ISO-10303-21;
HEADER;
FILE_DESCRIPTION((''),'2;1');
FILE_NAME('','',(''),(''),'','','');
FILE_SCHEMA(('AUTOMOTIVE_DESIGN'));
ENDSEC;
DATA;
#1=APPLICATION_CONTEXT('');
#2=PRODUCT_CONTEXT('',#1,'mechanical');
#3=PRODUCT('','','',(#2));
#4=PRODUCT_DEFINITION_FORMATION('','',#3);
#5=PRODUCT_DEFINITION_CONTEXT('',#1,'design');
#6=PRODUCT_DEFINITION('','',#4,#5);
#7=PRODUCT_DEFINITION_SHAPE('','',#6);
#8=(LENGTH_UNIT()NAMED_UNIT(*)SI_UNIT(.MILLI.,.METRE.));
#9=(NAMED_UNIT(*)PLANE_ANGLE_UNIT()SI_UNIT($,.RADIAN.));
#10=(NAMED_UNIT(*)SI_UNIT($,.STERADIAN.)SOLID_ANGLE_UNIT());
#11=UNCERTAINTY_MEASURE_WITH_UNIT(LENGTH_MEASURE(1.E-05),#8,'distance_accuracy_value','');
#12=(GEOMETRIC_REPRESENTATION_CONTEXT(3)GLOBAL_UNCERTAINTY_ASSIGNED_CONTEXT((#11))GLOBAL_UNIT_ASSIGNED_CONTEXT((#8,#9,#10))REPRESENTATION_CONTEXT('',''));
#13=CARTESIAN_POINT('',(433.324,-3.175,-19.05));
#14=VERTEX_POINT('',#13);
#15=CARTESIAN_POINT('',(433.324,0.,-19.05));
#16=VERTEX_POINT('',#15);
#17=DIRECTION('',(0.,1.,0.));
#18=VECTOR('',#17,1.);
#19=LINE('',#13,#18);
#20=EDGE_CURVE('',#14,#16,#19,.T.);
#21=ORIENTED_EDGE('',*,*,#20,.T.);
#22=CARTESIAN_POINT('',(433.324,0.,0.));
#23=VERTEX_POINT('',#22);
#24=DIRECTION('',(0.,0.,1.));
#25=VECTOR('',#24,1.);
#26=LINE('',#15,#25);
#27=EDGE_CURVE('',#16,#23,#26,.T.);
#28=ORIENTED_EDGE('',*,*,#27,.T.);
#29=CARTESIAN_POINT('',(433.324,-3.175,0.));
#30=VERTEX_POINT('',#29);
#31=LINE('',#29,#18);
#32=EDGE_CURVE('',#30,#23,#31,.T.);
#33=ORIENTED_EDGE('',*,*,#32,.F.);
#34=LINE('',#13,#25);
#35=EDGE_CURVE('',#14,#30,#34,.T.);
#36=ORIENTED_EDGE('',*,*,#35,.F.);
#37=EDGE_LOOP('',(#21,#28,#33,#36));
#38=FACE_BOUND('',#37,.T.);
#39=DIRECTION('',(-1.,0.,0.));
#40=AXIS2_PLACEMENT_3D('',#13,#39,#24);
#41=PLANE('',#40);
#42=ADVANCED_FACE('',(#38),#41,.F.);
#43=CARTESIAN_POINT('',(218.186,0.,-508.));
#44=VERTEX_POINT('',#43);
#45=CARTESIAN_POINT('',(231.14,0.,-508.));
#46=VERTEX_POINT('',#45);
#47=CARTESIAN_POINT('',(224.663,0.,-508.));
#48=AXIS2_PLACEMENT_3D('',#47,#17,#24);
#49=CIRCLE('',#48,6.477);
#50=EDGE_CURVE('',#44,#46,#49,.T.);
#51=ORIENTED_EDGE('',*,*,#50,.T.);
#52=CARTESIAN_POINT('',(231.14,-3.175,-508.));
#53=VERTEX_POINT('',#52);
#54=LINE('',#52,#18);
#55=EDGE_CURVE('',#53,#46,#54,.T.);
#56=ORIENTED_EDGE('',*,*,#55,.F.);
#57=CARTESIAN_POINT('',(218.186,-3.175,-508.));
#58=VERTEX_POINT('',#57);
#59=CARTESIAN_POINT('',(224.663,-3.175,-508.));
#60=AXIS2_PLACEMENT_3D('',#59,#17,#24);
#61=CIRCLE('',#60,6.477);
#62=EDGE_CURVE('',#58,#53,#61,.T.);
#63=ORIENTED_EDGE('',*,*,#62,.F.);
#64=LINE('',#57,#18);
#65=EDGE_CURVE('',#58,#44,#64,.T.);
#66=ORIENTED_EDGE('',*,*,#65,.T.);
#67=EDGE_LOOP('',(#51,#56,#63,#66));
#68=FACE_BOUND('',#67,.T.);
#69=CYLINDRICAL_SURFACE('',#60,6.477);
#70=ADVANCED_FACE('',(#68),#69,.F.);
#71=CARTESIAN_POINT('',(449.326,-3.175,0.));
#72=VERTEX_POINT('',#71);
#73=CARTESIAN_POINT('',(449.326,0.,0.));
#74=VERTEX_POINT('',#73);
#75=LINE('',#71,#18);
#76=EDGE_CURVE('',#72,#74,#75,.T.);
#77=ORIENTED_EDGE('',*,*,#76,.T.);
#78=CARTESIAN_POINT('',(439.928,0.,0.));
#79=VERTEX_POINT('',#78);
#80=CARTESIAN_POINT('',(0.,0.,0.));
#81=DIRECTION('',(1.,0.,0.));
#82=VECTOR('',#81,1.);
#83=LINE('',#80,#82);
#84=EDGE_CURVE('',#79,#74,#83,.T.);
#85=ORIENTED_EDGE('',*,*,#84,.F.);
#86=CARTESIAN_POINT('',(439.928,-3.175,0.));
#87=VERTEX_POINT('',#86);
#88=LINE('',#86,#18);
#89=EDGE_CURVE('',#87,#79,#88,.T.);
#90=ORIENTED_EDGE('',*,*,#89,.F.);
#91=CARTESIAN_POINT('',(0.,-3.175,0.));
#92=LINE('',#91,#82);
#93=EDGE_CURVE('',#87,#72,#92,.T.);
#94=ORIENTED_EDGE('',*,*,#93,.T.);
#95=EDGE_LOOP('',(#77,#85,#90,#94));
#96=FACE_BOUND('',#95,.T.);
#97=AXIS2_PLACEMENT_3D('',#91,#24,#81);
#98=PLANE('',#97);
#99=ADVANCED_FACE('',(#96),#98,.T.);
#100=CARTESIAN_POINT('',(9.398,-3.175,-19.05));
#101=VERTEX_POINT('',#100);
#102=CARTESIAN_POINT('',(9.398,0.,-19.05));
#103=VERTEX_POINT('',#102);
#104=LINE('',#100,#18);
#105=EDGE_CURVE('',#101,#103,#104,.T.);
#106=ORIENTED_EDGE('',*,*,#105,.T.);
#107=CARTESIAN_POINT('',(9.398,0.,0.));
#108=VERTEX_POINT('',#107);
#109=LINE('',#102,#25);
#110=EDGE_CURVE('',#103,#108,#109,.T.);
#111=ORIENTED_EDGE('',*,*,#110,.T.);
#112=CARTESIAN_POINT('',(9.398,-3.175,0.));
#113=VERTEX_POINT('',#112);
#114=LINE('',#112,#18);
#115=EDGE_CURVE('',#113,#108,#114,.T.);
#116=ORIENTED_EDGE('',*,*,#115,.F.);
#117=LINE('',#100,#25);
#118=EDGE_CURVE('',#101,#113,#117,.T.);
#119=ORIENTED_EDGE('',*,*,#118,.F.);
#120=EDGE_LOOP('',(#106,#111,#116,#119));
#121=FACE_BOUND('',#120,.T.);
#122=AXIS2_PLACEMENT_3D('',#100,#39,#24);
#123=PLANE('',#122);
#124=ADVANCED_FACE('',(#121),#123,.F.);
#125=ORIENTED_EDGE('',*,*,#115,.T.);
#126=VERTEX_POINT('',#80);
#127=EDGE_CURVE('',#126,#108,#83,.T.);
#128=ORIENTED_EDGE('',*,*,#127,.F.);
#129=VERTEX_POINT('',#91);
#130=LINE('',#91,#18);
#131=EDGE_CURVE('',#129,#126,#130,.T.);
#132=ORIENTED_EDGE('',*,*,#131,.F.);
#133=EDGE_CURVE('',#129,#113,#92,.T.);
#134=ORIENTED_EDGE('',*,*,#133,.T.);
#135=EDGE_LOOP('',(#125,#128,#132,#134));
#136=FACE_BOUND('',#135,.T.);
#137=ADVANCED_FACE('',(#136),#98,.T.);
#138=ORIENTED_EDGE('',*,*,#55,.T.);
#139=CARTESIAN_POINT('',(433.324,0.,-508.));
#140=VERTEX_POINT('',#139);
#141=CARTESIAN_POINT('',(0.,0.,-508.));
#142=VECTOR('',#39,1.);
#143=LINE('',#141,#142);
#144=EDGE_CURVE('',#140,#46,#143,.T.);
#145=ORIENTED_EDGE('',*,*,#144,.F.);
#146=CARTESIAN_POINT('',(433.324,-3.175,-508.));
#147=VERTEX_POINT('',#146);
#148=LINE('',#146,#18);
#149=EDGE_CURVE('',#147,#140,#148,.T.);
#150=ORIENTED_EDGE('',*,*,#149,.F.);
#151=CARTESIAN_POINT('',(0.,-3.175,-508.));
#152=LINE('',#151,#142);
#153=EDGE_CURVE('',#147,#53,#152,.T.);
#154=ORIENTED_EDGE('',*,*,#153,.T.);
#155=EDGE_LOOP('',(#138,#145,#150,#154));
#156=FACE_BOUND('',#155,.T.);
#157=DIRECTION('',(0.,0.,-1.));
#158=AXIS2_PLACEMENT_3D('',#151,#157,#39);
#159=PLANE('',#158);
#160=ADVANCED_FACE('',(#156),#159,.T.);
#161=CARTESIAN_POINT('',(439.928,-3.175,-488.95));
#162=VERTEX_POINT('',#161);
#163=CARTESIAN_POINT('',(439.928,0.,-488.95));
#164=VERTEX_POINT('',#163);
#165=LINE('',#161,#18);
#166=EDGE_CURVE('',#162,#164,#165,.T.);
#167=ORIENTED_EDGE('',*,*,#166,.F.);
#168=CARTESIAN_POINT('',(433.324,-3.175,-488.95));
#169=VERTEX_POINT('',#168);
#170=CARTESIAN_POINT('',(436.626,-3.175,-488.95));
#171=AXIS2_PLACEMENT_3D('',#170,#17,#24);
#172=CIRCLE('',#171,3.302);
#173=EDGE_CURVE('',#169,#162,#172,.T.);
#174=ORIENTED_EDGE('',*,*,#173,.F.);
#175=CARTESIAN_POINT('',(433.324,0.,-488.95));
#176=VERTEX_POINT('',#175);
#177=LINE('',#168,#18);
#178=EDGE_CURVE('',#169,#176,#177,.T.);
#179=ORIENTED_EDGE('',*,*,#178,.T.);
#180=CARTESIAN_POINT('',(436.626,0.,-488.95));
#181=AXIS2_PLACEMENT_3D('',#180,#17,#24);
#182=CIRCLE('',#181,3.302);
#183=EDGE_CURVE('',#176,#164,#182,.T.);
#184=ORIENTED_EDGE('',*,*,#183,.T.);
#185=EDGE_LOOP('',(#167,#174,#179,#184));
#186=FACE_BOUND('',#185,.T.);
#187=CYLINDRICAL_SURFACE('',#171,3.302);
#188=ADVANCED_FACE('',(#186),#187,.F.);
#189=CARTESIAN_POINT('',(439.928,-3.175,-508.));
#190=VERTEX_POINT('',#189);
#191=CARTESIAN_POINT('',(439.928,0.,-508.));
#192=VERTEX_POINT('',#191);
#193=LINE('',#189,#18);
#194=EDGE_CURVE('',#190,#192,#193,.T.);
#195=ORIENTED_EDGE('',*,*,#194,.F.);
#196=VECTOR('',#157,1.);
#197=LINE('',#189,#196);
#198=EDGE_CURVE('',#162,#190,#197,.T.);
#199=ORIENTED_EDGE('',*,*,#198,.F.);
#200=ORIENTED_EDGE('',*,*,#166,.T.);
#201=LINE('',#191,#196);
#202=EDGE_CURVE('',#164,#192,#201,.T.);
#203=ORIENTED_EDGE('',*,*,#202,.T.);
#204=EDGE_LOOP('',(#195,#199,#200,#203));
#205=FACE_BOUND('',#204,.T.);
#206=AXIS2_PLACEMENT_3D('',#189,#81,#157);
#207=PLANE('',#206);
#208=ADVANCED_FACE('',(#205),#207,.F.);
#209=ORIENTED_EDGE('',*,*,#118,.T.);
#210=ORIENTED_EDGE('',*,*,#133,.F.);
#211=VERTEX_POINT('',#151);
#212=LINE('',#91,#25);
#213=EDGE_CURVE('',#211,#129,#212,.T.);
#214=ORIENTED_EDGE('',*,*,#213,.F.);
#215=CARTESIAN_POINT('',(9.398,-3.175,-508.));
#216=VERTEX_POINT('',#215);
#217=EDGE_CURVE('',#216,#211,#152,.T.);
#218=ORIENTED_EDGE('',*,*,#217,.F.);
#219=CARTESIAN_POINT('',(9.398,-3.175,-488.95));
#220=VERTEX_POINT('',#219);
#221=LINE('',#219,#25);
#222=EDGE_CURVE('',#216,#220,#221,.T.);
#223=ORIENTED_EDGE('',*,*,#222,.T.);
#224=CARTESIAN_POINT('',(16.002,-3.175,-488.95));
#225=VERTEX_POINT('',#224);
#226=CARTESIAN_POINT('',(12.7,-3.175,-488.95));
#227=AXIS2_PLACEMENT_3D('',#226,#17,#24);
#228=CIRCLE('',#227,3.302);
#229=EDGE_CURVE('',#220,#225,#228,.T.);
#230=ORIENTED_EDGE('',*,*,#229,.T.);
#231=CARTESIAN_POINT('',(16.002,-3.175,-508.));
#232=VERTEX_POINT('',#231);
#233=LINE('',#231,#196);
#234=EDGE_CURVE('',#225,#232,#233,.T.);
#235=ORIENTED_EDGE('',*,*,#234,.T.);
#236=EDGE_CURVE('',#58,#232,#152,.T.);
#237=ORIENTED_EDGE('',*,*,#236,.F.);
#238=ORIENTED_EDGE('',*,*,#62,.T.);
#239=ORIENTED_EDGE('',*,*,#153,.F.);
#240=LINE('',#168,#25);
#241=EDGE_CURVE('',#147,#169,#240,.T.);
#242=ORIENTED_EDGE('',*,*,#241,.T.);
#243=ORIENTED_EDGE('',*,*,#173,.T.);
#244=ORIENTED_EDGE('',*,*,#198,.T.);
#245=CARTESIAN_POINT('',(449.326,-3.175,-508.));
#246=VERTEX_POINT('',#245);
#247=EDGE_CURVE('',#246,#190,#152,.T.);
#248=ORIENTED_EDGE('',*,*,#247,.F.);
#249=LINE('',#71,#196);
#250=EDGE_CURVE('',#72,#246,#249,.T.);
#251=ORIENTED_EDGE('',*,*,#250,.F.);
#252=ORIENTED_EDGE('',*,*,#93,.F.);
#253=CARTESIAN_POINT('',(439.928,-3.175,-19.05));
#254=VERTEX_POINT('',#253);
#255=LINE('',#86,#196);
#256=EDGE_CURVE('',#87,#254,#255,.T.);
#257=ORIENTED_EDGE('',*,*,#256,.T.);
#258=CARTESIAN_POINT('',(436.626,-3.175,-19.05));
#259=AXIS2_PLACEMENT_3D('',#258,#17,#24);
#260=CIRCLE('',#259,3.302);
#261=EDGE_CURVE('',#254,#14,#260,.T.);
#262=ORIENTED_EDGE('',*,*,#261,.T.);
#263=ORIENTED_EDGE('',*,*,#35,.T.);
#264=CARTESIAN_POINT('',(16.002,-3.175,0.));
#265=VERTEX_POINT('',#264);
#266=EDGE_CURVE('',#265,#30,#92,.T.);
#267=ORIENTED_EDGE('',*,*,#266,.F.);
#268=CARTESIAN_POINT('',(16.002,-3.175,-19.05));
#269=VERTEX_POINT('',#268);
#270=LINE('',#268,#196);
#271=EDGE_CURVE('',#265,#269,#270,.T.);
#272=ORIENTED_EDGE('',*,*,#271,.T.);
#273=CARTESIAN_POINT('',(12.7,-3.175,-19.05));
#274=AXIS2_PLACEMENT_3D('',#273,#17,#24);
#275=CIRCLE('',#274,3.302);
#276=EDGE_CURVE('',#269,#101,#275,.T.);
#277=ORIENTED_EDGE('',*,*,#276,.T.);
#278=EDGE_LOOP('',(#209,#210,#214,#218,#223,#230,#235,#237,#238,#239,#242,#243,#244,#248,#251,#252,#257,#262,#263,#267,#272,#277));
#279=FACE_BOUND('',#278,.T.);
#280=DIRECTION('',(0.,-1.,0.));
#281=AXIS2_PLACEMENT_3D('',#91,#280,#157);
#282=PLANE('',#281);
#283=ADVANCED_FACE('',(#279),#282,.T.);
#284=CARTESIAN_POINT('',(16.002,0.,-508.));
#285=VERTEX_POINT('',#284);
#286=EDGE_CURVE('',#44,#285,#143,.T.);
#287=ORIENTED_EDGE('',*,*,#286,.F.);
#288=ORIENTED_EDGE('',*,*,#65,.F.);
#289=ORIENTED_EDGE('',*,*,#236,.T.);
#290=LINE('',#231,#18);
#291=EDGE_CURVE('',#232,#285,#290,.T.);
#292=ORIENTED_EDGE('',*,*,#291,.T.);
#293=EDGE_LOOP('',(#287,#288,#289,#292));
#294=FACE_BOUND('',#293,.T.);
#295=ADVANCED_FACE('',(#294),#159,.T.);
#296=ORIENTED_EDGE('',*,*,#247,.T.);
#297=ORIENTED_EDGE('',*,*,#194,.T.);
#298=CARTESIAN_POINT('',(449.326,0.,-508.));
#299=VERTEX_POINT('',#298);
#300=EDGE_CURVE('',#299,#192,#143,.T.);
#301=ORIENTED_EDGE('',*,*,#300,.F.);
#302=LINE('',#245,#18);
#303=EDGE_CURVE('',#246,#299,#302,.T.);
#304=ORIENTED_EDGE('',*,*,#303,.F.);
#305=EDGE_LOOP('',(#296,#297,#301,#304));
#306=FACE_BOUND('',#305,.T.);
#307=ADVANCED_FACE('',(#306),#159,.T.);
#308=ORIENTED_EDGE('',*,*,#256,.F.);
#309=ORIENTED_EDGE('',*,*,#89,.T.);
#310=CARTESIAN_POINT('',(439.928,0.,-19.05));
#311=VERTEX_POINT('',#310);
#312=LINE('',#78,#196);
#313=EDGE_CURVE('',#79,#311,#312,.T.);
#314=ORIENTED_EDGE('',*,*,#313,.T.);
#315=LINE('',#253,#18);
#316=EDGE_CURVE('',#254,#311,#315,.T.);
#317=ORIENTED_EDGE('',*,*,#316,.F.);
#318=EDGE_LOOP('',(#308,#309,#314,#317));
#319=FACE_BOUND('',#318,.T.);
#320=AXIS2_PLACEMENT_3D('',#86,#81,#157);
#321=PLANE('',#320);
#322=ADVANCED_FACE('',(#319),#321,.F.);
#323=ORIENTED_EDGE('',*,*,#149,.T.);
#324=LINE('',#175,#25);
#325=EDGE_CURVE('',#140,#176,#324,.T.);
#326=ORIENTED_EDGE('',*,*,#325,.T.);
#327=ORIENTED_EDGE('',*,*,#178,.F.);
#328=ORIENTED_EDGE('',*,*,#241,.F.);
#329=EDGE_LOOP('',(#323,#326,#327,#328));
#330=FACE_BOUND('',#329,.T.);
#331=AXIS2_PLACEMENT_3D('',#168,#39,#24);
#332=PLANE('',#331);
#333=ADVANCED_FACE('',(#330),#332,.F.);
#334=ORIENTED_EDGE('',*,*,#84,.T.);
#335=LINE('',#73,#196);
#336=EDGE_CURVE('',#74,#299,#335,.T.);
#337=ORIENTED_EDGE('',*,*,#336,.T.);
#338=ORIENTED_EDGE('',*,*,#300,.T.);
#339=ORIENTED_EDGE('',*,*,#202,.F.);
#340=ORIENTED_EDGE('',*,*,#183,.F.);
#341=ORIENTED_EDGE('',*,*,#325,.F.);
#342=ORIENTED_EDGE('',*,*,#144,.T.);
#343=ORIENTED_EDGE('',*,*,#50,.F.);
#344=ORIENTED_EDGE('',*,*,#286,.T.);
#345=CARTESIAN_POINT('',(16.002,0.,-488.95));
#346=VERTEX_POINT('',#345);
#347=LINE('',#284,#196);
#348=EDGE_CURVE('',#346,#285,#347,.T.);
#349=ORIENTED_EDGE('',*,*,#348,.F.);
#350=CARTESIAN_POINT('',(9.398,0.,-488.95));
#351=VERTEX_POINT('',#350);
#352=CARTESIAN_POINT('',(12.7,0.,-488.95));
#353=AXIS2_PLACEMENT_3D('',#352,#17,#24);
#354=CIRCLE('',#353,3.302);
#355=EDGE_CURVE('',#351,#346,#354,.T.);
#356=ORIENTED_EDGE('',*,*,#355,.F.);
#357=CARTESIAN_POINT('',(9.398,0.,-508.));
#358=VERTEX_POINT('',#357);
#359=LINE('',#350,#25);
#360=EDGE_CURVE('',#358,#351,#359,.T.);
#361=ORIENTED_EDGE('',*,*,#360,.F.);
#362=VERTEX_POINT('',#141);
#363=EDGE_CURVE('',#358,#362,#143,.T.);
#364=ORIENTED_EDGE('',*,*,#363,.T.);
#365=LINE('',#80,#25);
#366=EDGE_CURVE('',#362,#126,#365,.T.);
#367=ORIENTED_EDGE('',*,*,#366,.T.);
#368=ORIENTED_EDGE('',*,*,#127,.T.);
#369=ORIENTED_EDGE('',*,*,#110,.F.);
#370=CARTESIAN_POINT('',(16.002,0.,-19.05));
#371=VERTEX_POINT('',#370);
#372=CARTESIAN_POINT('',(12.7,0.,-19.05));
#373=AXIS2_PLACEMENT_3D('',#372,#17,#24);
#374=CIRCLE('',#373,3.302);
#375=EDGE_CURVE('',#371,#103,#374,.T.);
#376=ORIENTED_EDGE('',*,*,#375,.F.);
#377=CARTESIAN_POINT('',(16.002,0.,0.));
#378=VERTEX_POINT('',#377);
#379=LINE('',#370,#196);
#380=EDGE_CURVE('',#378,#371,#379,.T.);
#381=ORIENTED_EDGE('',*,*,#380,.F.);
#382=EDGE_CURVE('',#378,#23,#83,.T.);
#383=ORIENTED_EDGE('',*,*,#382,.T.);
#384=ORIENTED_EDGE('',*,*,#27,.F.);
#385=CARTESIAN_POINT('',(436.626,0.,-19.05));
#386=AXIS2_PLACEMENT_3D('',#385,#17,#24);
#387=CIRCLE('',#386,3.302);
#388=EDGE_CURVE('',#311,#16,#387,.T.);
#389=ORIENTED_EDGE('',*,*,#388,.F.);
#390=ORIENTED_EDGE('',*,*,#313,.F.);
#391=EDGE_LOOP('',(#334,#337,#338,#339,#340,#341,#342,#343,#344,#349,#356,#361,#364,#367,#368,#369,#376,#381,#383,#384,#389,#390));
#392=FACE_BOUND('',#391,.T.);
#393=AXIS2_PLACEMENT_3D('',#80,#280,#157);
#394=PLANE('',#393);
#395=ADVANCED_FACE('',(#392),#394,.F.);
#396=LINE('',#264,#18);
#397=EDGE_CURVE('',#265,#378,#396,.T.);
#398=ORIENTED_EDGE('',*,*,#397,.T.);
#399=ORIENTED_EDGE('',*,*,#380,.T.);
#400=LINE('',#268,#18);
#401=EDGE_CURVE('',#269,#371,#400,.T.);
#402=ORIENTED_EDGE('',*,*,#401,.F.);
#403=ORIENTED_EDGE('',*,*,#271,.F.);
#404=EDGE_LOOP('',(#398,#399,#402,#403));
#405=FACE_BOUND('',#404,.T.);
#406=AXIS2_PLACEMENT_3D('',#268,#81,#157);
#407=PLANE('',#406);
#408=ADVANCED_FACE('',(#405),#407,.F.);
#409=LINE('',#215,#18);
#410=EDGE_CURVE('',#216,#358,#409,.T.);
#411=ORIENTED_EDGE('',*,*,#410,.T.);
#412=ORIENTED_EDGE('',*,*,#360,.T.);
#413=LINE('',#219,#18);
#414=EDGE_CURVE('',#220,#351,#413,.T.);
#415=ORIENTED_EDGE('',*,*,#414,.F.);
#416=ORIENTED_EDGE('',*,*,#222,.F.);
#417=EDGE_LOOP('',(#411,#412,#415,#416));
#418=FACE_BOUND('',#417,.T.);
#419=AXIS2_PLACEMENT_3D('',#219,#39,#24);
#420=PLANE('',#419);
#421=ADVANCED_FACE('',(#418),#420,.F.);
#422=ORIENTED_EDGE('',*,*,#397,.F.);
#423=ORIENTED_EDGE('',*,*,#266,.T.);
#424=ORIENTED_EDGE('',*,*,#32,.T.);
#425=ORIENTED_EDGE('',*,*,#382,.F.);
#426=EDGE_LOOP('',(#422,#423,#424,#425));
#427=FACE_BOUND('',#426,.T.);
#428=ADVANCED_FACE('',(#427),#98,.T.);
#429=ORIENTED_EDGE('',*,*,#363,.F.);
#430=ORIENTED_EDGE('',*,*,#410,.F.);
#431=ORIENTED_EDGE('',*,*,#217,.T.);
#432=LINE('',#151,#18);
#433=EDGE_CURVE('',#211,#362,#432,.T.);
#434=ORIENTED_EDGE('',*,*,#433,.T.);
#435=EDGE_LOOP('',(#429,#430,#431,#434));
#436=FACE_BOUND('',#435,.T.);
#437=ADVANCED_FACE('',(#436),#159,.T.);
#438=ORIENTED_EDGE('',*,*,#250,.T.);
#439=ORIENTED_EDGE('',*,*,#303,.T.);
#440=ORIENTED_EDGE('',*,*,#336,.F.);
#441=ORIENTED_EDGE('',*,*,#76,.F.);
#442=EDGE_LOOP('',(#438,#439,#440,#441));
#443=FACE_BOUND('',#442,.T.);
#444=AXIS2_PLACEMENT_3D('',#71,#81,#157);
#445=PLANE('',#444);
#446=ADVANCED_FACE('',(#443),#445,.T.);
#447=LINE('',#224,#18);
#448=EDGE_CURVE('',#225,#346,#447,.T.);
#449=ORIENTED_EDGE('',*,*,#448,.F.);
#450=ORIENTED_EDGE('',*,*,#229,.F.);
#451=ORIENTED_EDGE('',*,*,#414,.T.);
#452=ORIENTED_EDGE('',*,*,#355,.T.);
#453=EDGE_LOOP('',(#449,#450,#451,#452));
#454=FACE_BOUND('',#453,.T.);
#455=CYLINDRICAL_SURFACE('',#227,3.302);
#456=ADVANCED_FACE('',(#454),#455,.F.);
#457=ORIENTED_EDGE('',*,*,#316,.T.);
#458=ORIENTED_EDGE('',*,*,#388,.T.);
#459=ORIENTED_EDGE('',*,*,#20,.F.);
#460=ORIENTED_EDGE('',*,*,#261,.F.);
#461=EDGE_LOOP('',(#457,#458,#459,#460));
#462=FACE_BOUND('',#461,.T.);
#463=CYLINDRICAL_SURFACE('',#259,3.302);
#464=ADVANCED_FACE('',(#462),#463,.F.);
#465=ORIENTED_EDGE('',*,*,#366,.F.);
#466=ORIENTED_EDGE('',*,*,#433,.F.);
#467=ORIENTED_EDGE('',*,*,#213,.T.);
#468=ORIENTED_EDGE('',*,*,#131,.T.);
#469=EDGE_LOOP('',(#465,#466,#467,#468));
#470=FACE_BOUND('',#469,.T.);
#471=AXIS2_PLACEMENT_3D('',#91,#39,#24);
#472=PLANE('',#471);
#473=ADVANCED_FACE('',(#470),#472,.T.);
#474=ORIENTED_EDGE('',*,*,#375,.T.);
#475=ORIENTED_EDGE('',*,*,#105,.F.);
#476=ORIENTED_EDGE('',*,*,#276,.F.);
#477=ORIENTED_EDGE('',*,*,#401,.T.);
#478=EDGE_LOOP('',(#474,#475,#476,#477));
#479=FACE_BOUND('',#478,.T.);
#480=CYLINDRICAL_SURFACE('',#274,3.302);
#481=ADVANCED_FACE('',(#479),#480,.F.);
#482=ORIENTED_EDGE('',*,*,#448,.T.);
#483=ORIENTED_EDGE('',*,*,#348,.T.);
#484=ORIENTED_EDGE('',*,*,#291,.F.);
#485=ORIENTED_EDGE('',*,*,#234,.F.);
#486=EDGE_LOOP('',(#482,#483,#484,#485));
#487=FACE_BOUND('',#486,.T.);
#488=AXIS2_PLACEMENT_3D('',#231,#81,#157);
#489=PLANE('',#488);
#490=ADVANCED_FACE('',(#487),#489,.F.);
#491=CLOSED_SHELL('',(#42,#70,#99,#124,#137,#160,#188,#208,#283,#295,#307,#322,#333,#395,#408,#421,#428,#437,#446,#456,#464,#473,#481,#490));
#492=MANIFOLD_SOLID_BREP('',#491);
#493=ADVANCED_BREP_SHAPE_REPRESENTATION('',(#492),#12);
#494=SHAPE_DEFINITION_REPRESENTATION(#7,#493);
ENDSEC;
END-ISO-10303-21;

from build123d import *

# Parameters (mm, degrees)
SKETCH1_W          = 449.326
SKETCH1_H          = 508
BASE_FLANGE1_DEPTH = 3.175
CUT_EXTRUDE1_DEPTH = 679.209359196


# Sheet-metal steps are written as plain solids
with BuildPart() as part:
    # Sketch1 → Base-Flange1 (new body)
    with BuildSketch(Plane(origin=(0, 0, 0), x_dir=(1, 0, 0), z_dir=(0, 1, 0))):
        with Locations((224.663, 254)):
            Rectangle(SKETCH1_W, SKETCH1_H)
    extrude(amount=-BASE_FLANGE1_DEPTH)

    # Sketch6 → Cut-Extrude1 (cut, through all)
    with BuildSketch(Plane(origin=(0, 0, 0), x_dir=(1, 0, 0), z_dir=(0, 1, 0))):
        with BuildLine():
            Line((9.398, 19.05), (9.398, 0))
            Line((9.398, 0), (16.002, 0))
            Line((16.002, 0), (16.002, 19.05))
            ThreePointArc((16.002, 19.05), (12.7, 22.352), (9.398, 19.05))
        make_face()
        with BuildLine():
            Line((433.324, 19.05), (433.324, 0))
            Line((433.324, 0), (439.928, 0))
            Line((439.928, 0), (439.928, 19.05))
            ThreePointArc((439.928, 19.05), (436.626, 22.352), (433.324, 19.05))
        make_face()
        with BuildLine():
            Line((9.398, 488.95), (9.398, 508))
            Line((9.398, 508), (16.002, 508))
            Line((16.002, 508), (16.002, 488.95))
            ThreePointArc((16.002, 488.95), (12.7, 485.648), (9.398, 488.95))
        make_face()
        with BuildLine():
            Line((433.324, 488.95), (433.324, 508))
            Line((433.324, 508), (439.928, 508))
            Line((439.928, 508), (439.928, 488.95))
            ThreePointArc((439.928, 488.95), (436.626, 485.648), (433.324, 488.95))
        make_face()
        with BuildLine():
            Line((218.186, 508), (231.14, 508))
            ThreePointArc((231.14, 508), (224.663, 501.523), (218.186, 508))
        make_face()
    extrude(amount=-CUT_EXTRUDE1_DEPTH, mode=Mode.SUBTRACT)


solid = part.part
